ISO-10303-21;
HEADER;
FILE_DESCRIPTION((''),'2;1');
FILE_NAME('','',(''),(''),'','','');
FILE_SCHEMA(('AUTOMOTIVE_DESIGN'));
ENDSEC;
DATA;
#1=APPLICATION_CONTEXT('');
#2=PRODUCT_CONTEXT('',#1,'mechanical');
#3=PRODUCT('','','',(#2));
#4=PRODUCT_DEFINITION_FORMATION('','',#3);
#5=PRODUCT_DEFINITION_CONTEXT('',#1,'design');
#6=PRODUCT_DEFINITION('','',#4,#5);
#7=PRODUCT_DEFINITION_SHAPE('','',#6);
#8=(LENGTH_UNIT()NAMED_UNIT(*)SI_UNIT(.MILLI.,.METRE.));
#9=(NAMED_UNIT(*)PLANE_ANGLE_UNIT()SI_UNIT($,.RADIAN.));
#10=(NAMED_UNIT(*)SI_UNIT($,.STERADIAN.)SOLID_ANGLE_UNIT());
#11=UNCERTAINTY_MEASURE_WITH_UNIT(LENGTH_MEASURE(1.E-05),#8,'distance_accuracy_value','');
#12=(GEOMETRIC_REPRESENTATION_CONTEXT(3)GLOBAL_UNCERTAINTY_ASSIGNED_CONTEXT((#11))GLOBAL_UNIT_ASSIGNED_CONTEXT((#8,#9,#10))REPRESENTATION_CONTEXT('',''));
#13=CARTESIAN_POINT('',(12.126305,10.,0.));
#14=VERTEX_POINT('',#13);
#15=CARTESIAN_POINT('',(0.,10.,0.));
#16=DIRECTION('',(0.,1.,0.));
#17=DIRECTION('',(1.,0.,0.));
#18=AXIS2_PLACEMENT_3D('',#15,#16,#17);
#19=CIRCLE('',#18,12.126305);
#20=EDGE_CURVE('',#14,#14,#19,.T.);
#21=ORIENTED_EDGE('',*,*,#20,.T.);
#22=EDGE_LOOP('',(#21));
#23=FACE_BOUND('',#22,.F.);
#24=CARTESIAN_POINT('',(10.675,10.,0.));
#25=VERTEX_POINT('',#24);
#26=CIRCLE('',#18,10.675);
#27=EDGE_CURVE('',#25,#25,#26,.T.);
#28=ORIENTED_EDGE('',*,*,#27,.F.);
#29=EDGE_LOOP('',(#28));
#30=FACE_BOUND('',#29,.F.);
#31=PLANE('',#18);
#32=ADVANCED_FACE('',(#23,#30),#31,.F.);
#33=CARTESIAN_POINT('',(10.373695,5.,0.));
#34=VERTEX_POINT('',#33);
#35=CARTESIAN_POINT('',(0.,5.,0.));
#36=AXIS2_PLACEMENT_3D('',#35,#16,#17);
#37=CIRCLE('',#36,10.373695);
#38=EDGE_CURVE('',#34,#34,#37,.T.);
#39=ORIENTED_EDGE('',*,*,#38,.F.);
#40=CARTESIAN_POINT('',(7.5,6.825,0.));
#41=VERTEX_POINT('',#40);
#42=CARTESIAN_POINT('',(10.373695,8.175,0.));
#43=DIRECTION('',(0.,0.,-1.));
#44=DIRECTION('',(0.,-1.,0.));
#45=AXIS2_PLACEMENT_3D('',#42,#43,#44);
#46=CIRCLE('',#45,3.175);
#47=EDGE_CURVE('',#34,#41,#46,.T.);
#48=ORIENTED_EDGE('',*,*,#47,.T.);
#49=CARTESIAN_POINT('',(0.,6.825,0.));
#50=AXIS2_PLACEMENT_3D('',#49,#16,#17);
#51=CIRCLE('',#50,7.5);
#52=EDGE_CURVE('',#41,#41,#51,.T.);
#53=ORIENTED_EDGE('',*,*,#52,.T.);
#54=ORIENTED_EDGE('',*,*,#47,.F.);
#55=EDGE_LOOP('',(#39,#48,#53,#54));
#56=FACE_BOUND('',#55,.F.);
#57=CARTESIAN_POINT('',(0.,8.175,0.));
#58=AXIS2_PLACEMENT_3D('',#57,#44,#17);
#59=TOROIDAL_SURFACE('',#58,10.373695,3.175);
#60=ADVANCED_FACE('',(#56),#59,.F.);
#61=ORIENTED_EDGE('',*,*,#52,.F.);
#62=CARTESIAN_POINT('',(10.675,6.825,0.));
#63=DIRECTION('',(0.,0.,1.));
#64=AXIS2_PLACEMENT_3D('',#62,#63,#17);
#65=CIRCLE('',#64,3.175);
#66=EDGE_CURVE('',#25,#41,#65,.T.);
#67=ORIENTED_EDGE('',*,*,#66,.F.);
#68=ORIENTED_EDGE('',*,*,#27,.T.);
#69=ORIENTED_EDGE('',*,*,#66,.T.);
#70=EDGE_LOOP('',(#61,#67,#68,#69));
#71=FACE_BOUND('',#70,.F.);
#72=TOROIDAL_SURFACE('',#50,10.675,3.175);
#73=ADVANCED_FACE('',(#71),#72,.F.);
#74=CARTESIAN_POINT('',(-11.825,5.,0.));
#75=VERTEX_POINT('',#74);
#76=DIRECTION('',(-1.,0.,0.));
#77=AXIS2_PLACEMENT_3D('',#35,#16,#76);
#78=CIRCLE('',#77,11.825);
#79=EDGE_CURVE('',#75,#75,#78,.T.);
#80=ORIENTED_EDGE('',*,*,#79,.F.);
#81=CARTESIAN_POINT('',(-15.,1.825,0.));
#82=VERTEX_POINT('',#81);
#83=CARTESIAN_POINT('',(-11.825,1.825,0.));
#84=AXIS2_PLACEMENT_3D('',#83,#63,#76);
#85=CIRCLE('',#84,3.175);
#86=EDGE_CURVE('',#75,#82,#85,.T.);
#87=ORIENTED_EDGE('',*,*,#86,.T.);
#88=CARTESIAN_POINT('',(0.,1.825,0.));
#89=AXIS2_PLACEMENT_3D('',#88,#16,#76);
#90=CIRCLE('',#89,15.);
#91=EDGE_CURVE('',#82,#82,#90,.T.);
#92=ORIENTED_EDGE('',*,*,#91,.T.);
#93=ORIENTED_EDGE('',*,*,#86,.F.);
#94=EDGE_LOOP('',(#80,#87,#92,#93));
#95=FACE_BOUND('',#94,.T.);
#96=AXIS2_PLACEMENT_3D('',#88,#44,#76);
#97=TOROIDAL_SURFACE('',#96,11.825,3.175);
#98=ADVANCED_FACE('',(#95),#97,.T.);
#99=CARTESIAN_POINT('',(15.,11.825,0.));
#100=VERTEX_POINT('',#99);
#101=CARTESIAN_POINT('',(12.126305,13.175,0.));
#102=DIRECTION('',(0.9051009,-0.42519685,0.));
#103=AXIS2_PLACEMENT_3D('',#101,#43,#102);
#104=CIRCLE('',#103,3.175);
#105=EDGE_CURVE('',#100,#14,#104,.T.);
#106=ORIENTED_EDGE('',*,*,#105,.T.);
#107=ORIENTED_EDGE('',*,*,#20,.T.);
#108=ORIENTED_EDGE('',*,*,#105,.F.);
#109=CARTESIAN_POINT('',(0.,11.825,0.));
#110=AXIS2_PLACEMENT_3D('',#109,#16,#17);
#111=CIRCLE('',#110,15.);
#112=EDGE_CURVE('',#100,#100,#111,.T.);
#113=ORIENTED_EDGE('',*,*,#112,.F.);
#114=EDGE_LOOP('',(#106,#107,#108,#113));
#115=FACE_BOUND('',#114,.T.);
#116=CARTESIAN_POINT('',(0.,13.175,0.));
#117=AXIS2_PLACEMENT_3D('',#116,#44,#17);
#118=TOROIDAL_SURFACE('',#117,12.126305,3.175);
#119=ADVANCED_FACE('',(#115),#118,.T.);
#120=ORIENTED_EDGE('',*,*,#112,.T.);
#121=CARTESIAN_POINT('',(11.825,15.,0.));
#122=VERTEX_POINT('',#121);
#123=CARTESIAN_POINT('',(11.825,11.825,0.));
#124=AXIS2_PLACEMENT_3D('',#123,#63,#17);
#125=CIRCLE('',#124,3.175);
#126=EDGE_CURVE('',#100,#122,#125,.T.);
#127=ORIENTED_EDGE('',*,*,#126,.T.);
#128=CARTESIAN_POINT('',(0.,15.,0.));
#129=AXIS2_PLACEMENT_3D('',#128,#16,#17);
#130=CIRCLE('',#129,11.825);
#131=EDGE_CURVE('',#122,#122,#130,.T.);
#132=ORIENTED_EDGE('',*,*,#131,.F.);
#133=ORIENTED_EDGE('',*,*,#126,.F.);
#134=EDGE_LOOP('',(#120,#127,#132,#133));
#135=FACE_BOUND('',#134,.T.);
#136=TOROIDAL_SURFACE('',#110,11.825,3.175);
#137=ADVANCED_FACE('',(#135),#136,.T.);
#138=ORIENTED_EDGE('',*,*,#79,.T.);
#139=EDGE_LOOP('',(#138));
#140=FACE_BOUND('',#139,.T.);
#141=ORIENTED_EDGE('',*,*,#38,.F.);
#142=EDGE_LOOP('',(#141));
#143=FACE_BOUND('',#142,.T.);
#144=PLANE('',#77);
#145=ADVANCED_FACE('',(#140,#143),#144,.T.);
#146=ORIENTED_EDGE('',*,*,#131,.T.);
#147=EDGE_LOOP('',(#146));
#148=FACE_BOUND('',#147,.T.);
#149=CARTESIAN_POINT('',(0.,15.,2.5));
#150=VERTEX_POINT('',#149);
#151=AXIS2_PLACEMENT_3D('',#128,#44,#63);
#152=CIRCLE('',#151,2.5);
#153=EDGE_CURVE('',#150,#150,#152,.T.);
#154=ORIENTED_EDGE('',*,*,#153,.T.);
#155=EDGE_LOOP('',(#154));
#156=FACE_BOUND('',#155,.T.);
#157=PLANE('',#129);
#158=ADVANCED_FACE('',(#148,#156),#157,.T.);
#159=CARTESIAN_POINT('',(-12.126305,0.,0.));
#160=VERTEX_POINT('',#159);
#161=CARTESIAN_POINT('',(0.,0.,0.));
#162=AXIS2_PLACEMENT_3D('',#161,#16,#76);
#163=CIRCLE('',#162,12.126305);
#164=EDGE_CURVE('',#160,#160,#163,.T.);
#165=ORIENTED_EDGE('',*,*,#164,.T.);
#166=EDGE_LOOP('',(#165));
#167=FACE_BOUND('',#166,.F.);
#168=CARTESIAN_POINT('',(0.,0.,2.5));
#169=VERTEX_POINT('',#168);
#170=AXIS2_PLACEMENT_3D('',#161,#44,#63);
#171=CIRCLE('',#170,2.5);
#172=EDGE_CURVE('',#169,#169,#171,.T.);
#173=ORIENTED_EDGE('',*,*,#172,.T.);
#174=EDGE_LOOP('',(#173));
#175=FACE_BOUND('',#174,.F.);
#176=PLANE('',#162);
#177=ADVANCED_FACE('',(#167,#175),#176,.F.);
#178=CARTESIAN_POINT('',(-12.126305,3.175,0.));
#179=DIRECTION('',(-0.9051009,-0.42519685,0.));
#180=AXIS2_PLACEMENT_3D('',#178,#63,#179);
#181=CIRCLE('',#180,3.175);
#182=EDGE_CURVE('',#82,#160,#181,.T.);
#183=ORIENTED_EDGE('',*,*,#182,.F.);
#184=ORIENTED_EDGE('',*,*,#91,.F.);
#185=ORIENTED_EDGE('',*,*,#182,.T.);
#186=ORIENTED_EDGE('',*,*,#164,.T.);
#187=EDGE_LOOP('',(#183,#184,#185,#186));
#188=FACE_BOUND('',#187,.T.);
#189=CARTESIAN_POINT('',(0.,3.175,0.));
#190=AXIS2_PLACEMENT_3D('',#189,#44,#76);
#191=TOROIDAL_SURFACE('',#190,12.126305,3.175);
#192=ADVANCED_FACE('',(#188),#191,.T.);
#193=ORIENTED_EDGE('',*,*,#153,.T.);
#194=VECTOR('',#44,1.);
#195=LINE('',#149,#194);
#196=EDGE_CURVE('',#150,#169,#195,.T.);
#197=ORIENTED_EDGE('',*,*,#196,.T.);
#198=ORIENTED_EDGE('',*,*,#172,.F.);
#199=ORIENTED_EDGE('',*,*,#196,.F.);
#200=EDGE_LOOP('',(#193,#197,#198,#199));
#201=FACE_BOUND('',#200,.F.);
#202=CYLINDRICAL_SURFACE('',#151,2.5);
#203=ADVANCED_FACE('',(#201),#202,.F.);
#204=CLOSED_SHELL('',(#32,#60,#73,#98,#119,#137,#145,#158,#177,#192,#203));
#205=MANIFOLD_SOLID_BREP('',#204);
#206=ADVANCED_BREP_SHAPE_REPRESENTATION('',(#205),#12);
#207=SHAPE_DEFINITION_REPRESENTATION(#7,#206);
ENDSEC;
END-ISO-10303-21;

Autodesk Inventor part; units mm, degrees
ref_plane "YZ Plane" through (0, 0, 0) normal (1, 0, 0) x (0, 1, 0)
ref_plane "XZ Plane" through (0, 0, 0) normal (0, 1, 0) x (-1, 0, 0)
ref_plane "XY Plane" through (0, 0, 0) normal (0, 0, 1) x (1, 0, 0)
sketch "Sketch1" plane through (0, 0, 0) normal (0, 1, 0) x (-1, 0, 0)
  circle A0 centre (0, 0) radius 15
  dimension "d0" = 30
extrude "Extrusion1" add sketch "Sketch1" along normal blind 5
sketch "Sketch2" plane through (0, 5, 0) normal (0, 1, 0) x (1, 0, 0)
  circle A0 centre (0, 0) radius 7.5
  dimension "d3" = 15
extrude "Extrusion2" add sketch "Sketch2" along normal blind 5
sketch "Sketch3" plane through (0, 10, 0) normal (0, 1, 0) x (1, 0, 0)
  circle A0 centre (0, 0) radius 15
  dimension "d6" = 30
extrude "Extrusion3" add sketch "Sketch3" along normal blind 5
fillet "Fillet1" radius 3.175 1 edges at (-15, 15, 0)
fillet "Fillet2" radius 3.175 1 edges at (-15, 10, 0)
fillet "Fillet3" radius 3.175 1 edges at (-7.5, 10, 0)
fillet "Fillet4" radius 3.175 1 edges at (15, 5, 0)
fillet "Fillet5" radius 3.175 1 edges at (15, 0, 0)
fillet "Fillet6" radius 3.175 1 edges at (-7.5, 5, 0)
hole "Hole1" at (0, 15, 0) direction (0, -1, 0) diameter 5 end through all
properties part number "even more awesome inventor thing"
